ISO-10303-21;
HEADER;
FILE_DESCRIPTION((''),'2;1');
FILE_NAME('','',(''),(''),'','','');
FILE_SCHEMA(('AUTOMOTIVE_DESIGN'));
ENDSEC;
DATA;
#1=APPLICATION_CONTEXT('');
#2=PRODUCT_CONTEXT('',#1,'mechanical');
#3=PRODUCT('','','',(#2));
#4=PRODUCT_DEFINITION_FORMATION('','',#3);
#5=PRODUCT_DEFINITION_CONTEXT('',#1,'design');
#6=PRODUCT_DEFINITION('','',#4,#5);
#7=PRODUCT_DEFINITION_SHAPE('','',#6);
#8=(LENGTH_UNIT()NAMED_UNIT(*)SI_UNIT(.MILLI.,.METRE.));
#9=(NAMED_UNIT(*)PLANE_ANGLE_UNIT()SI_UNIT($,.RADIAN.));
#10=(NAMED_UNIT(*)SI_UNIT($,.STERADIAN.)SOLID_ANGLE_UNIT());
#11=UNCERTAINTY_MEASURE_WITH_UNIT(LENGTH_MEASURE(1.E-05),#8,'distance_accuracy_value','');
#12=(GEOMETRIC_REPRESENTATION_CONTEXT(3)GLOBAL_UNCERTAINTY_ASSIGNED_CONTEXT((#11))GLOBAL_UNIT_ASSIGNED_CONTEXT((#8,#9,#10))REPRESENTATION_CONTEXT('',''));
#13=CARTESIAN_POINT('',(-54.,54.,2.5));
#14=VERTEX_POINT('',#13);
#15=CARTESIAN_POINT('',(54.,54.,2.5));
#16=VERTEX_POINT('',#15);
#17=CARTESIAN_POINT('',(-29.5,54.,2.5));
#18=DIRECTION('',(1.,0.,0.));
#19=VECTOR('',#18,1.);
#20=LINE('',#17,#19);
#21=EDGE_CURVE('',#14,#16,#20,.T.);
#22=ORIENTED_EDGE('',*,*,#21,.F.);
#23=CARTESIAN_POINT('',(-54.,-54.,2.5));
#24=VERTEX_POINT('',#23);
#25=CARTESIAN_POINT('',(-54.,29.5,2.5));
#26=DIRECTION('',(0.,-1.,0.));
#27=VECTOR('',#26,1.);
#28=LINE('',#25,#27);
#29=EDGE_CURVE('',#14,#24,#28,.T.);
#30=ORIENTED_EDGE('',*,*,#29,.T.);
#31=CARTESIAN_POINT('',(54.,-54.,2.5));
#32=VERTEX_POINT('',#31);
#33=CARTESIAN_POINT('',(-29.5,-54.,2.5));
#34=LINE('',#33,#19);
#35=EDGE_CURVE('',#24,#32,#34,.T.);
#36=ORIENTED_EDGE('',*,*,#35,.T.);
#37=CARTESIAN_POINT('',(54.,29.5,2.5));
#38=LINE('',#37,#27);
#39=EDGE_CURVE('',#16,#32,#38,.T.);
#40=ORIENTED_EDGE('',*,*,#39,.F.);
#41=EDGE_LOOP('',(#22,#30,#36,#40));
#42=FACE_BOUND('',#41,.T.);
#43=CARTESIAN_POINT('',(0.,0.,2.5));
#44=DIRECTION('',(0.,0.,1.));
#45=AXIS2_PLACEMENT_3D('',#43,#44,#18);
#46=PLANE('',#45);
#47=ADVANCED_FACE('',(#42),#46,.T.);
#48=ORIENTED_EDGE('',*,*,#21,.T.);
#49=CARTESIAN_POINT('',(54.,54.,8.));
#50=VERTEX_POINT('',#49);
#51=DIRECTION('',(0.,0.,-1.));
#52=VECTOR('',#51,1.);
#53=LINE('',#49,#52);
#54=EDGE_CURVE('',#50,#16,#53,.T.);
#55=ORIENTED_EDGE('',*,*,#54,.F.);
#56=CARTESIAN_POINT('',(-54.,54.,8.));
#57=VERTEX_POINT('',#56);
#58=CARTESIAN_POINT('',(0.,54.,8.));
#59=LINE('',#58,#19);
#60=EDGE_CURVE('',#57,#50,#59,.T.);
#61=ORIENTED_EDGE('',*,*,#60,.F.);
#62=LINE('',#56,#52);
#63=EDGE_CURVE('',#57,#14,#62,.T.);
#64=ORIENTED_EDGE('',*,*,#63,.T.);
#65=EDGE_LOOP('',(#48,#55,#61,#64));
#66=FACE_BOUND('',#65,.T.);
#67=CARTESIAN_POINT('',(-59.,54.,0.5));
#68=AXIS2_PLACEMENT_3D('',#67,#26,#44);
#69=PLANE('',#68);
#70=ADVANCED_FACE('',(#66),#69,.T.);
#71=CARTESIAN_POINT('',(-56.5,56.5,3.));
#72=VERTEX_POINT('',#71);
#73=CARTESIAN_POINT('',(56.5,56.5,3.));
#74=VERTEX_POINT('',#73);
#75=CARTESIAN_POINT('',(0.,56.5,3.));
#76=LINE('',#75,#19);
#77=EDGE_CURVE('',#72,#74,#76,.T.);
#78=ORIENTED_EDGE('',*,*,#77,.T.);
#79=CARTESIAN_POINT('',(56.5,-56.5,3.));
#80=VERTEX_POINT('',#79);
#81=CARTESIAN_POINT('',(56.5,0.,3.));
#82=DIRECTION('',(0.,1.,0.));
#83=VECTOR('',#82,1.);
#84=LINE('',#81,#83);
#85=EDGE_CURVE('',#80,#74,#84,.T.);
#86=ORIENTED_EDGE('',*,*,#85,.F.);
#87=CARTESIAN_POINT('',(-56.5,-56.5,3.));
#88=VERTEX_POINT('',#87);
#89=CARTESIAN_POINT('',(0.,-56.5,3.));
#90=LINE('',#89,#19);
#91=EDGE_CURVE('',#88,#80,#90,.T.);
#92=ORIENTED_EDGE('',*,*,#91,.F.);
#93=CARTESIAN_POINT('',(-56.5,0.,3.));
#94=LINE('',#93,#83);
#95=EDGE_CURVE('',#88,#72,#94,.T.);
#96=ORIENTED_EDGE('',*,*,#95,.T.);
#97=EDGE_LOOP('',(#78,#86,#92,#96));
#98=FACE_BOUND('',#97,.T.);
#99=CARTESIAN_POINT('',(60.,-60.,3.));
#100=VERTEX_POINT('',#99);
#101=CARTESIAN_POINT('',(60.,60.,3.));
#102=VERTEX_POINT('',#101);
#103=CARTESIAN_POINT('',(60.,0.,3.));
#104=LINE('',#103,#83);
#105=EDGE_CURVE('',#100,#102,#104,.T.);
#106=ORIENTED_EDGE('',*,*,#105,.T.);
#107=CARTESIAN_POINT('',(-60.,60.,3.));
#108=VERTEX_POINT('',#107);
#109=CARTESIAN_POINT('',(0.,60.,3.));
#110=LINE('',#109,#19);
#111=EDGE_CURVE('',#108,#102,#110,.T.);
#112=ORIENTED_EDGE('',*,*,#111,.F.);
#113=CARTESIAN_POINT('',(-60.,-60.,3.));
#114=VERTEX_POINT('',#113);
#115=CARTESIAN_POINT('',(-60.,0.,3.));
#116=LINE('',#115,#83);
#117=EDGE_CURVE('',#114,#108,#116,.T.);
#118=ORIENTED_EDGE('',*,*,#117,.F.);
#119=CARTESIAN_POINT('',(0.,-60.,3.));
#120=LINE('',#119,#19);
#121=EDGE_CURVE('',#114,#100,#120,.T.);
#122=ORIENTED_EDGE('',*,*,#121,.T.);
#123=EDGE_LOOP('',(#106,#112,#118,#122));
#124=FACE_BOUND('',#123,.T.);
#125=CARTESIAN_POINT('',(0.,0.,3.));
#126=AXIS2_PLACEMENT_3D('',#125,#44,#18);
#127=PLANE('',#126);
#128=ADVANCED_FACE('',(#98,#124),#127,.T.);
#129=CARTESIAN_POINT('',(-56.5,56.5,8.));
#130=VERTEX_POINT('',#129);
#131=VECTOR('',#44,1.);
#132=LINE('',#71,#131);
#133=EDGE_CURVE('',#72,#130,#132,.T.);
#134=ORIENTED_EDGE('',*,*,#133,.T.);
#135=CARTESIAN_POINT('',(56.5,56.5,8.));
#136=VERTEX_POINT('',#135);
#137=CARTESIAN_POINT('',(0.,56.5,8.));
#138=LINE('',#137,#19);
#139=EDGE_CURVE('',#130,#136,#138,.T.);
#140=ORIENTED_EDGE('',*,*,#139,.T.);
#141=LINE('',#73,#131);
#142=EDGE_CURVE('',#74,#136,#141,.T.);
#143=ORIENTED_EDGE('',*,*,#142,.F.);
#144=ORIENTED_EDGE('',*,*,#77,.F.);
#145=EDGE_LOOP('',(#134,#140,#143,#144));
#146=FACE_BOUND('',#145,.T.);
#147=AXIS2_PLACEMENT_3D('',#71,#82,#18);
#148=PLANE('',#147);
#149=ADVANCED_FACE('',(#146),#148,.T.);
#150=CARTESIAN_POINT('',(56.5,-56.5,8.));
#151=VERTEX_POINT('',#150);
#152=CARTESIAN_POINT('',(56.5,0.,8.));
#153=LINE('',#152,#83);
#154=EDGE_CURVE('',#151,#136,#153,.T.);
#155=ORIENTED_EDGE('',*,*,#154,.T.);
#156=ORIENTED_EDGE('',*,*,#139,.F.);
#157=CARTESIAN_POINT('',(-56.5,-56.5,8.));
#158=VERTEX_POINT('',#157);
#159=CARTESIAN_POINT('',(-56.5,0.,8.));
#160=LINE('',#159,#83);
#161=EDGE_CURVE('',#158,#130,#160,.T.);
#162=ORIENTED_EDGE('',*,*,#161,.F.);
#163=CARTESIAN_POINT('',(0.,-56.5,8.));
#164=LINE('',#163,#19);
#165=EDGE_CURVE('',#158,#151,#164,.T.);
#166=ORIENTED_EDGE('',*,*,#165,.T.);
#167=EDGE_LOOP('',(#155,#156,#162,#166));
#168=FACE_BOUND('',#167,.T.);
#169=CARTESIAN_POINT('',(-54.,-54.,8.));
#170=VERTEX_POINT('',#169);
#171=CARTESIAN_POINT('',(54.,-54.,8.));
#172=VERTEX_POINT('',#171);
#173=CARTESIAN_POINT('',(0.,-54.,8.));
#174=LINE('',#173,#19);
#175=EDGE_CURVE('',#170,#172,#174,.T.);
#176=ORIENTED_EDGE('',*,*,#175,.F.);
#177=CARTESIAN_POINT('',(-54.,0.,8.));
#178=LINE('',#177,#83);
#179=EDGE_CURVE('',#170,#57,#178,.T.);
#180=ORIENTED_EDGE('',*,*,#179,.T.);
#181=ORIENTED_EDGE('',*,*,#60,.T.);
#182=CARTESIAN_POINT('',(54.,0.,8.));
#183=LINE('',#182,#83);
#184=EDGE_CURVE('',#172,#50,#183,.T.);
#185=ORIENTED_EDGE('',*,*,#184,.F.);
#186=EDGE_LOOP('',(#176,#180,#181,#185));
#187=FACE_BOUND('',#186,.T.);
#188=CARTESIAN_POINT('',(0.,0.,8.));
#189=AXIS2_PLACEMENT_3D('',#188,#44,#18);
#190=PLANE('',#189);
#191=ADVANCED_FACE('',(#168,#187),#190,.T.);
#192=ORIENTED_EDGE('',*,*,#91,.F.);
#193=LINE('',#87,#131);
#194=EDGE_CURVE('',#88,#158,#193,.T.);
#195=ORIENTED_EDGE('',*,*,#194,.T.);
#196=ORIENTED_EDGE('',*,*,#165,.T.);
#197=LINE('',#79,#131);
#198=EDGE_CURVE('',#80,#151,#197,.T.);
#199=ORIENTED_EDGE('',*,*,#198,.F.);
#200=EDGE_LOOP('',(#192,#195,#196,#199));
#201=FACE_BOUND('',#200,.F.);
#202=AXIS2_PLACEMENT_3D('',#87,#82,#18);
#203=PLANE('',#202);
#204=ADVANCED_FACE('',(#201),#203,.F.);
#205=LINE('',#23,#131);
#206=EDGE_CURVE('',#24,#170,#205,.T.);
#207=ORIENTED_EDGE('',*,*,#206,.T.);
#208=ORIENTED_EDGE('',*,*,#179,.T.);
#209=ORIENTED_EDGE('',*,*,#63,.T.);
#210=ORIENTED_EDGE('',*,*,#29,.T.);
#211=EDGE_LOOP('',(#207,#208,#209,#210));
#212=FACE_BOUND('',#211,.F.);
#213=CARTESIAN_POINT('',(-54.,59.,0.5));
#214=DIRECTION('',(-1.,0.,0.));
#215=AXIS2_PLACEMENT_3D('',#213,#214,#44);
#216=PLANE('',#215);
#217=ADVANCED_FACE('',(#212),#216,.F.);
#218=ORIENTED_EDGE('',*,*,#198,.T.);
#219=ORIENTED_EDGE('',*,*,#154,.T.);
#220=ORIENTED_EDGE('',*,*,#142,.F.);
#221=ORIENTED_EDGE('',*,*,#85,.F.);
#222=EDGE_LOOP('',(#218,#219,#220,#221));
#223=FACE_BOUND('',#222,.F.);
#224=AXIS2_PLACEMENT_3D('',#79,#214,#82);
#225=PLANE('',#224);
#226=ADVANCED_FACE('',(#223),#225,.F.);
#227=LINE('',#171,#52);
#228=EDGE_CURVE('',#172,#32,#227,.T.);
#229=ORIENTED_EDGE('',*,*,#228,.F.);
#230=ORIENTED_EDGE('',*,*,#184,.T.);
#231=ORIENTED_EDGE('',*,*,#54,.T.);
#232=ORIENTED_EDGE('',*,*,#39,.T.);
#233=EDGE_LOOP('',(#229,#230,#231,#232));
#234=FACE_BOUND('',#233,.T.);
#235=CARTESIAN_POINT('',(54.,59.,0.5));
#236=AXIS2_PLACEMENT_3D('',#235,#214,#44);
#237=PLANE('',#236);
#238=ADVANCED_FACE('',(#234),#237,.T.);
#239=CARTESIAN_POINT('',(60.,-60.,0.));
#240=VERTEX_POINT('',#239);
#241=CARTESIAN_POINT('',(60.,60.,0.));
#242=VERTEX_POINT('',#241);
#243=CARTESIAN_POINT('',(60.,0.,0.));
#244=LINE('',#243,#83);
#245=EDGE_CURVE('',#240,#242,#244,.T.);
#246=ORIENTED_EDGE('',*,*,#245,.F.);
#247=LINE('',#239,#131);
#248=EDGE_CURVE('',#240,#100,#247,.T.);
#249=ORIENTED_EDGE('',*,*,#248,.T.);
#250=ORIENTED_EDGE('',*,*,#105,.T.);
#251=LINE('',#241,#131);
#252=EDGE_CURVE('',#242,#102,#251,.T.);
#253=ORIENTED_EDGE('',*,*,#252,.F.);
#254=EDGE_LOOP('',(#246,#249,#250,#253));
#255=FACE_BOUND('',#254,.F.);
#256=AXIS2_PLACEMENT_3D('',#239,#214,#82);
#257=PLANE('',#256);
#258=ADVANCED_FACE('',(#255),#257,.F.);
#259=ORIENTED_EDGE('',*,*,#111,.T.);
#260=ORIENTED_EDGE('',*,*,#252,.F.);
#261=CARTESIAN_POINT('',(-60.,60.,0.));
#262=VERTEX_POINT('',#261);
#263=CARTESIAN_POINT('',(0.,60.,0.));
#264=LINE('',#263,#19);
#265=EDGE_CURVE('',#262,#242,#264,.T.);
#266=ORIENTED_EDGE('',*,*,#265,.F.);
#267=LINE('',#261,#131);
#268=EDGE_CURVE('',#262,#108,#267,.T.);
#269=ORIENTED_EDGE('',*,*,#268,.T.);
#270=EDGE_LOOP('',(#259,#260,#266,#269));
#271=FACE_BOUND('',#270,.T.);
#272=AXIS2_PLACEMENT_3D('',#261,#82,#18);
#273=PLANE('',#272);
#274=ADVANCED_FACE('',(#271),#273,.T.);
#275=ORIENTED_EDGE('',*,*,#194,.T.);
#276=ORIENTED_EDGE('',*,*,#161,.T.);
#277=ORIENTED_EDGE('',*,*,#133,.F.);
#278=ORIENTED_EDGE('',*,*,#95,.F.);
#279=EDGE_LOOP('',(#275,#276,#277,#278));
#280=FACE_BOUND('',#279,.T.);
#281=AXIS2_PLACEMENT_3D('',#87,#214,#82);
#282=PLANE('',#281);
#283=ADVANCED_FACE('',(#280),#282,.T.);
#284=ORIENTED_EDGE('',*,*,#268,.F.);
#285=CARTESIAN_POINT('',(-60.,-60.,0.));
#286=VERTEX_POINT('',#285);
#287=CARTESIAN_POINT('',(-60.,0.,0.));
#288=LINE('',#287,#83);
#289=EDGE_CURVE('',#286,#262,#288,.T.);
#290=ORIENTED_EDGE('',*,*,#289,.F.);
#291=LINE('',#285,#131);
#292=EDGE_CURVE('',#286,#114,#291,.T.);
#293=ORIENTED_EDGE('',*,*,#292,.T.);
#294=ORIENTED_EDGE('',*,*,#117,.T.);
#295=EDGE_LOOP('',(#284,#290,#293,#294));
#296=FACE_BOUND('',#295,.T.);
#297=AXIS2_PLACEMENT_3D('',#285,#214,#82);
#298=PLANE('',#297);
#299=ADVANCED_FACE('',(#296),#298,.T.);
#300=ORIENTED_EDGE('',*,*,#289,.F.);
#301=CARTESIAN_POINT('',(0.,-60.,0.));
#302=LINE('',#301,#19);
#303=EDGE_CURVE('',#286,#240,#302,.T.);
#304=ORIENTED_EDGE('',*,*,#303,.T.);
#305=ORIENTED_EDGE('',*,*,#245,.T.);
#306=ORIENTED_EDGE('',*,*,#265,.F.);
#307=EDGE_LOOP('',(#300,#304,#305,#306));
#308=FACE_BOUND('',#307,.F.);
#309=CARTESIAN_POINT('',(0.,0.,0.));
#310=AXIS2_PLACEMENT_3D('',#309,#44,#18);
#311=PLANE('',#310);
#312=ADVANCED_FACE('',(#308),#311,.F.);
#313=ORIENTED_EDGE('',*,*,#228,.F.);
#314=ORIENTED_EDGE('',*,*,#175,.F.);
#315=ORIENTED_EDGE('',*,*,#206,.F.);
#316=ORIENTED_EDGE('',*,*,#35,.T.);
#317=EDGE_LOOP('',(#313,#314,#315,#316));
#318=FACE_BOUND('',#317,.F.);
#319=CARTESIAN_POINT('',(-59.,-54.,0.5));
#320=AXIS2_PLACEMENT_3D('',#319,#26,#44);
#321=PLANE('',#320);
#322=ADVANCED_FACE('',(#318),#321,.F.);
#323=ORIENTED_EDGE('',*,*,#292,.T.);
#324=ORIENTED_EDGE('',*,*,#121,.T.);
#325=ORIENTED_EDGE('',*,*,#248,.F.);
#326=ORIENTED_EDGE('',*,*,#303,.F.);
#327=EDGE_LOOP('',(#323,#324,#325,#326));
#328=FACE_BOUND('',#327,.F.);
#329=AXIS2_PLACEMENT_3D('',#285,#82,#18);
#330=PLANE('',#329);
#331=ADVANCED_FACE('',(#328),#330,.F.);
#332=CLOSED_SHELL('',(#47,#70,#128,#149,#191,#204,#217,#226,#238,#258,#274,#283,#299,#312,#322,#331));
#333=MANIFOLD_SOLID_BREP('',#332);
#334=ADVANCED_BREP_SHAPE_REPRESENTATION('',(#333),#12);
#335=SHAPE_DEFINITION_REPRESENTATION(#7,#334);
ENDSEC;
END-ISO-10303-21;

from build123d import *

# Parameters (mm, degrees)
F0_W        = 120
F0_H        = 120
F1_DEPTH    = 3
F2_W        = 113
F2_H        = 113
F3_DEPTH    = 5
F4_T        = 2.5
F4_T3_DEPTH = 118
F4_T5_DEPTH = 118


# Not quite as in the source:
# - a shell that OpenCascade refuses in one call is made with other operations: the cavity is built on its own and cut out


with BuildPart() as f1:
    # F0 (on Top) → F1 (new body)
    with BuildSketch(Plane.XY):
        Rectangle(F0_W, F0_H)
    extrude(amount=F1_DEPTH)

    # F2 (on face) → F3 (join)
    with BuildSketch(Plane.XY.offset(3)):
        Rectangle(F2_W, F2_H)
    extrude(amount=F3_DEPTH)

    # F4: shell of thickness 2.5, made by hand


with BuildPart() as f4_core1:
    # F4_t2: copy of F1
    add(f1.part)

    # the walls: a layer under each face that stays
    f4_faces = [f4_core1.faces().sort_by_distance(p)[0] for p in [
        (0, -60, 1.5),
        (-60, 0, 1.5),
        (60, 0, 1.5),
        (0, 0, 0),
        (41.25, -58.5185185185, 3),
        (0, 60, 1.5),
        (0, -56.5, 5.5),
        (56.5, 0, 5.5),
        (0, 56.5, 5.5),
        (-56.5, 0, 5.5),
    ]]
    thicken(f4_faces, amount=-F4_T, mode=Mode.SUBTRACT)

    # F4_s4 → F4_t3 (cut)
    with BuildSketch(Plane.YZ.offset(-59)):
        Polygon((-56.525, 3.025), (-56.5, 0.5), (-54, 0.5), (-54, 3), align=None)
        Polygon((56.525, 3.025), (56.5, 0.5), (54, 0.5), (54, 3), align=None)
    extrude(amount=F4_T3_DEPTH, mode=Mode.SUBTRACT)

    # F4_s6 → F4_t5 (cut)
    with BuildSketch(Plane.XZ.offset(-59)):
        Polygon((56.525, 3.025), (56.5, 0.5), (54, 0.5), (54, 3), align=None)
        Polygon((-56.525, 3.025), (-56.5, 0.5), (-54, 0.5), (-54, 3), align=None)
    extrude(amount=F4_T5_DEPTH, mode=Mode.SUBTRACT)


with BuildPart() as f1_1:
    add(f1.part)

    # what is left inside the walls is the cavity
    f4_cavity = [f4_core1.part.solids().sort_by_distance(p)[0] for p in [
        (0, -18, 2.525),
    ]]
    add(f4_cavity, mode=Mode.SUBTRACT)


solid = f1_1.part
